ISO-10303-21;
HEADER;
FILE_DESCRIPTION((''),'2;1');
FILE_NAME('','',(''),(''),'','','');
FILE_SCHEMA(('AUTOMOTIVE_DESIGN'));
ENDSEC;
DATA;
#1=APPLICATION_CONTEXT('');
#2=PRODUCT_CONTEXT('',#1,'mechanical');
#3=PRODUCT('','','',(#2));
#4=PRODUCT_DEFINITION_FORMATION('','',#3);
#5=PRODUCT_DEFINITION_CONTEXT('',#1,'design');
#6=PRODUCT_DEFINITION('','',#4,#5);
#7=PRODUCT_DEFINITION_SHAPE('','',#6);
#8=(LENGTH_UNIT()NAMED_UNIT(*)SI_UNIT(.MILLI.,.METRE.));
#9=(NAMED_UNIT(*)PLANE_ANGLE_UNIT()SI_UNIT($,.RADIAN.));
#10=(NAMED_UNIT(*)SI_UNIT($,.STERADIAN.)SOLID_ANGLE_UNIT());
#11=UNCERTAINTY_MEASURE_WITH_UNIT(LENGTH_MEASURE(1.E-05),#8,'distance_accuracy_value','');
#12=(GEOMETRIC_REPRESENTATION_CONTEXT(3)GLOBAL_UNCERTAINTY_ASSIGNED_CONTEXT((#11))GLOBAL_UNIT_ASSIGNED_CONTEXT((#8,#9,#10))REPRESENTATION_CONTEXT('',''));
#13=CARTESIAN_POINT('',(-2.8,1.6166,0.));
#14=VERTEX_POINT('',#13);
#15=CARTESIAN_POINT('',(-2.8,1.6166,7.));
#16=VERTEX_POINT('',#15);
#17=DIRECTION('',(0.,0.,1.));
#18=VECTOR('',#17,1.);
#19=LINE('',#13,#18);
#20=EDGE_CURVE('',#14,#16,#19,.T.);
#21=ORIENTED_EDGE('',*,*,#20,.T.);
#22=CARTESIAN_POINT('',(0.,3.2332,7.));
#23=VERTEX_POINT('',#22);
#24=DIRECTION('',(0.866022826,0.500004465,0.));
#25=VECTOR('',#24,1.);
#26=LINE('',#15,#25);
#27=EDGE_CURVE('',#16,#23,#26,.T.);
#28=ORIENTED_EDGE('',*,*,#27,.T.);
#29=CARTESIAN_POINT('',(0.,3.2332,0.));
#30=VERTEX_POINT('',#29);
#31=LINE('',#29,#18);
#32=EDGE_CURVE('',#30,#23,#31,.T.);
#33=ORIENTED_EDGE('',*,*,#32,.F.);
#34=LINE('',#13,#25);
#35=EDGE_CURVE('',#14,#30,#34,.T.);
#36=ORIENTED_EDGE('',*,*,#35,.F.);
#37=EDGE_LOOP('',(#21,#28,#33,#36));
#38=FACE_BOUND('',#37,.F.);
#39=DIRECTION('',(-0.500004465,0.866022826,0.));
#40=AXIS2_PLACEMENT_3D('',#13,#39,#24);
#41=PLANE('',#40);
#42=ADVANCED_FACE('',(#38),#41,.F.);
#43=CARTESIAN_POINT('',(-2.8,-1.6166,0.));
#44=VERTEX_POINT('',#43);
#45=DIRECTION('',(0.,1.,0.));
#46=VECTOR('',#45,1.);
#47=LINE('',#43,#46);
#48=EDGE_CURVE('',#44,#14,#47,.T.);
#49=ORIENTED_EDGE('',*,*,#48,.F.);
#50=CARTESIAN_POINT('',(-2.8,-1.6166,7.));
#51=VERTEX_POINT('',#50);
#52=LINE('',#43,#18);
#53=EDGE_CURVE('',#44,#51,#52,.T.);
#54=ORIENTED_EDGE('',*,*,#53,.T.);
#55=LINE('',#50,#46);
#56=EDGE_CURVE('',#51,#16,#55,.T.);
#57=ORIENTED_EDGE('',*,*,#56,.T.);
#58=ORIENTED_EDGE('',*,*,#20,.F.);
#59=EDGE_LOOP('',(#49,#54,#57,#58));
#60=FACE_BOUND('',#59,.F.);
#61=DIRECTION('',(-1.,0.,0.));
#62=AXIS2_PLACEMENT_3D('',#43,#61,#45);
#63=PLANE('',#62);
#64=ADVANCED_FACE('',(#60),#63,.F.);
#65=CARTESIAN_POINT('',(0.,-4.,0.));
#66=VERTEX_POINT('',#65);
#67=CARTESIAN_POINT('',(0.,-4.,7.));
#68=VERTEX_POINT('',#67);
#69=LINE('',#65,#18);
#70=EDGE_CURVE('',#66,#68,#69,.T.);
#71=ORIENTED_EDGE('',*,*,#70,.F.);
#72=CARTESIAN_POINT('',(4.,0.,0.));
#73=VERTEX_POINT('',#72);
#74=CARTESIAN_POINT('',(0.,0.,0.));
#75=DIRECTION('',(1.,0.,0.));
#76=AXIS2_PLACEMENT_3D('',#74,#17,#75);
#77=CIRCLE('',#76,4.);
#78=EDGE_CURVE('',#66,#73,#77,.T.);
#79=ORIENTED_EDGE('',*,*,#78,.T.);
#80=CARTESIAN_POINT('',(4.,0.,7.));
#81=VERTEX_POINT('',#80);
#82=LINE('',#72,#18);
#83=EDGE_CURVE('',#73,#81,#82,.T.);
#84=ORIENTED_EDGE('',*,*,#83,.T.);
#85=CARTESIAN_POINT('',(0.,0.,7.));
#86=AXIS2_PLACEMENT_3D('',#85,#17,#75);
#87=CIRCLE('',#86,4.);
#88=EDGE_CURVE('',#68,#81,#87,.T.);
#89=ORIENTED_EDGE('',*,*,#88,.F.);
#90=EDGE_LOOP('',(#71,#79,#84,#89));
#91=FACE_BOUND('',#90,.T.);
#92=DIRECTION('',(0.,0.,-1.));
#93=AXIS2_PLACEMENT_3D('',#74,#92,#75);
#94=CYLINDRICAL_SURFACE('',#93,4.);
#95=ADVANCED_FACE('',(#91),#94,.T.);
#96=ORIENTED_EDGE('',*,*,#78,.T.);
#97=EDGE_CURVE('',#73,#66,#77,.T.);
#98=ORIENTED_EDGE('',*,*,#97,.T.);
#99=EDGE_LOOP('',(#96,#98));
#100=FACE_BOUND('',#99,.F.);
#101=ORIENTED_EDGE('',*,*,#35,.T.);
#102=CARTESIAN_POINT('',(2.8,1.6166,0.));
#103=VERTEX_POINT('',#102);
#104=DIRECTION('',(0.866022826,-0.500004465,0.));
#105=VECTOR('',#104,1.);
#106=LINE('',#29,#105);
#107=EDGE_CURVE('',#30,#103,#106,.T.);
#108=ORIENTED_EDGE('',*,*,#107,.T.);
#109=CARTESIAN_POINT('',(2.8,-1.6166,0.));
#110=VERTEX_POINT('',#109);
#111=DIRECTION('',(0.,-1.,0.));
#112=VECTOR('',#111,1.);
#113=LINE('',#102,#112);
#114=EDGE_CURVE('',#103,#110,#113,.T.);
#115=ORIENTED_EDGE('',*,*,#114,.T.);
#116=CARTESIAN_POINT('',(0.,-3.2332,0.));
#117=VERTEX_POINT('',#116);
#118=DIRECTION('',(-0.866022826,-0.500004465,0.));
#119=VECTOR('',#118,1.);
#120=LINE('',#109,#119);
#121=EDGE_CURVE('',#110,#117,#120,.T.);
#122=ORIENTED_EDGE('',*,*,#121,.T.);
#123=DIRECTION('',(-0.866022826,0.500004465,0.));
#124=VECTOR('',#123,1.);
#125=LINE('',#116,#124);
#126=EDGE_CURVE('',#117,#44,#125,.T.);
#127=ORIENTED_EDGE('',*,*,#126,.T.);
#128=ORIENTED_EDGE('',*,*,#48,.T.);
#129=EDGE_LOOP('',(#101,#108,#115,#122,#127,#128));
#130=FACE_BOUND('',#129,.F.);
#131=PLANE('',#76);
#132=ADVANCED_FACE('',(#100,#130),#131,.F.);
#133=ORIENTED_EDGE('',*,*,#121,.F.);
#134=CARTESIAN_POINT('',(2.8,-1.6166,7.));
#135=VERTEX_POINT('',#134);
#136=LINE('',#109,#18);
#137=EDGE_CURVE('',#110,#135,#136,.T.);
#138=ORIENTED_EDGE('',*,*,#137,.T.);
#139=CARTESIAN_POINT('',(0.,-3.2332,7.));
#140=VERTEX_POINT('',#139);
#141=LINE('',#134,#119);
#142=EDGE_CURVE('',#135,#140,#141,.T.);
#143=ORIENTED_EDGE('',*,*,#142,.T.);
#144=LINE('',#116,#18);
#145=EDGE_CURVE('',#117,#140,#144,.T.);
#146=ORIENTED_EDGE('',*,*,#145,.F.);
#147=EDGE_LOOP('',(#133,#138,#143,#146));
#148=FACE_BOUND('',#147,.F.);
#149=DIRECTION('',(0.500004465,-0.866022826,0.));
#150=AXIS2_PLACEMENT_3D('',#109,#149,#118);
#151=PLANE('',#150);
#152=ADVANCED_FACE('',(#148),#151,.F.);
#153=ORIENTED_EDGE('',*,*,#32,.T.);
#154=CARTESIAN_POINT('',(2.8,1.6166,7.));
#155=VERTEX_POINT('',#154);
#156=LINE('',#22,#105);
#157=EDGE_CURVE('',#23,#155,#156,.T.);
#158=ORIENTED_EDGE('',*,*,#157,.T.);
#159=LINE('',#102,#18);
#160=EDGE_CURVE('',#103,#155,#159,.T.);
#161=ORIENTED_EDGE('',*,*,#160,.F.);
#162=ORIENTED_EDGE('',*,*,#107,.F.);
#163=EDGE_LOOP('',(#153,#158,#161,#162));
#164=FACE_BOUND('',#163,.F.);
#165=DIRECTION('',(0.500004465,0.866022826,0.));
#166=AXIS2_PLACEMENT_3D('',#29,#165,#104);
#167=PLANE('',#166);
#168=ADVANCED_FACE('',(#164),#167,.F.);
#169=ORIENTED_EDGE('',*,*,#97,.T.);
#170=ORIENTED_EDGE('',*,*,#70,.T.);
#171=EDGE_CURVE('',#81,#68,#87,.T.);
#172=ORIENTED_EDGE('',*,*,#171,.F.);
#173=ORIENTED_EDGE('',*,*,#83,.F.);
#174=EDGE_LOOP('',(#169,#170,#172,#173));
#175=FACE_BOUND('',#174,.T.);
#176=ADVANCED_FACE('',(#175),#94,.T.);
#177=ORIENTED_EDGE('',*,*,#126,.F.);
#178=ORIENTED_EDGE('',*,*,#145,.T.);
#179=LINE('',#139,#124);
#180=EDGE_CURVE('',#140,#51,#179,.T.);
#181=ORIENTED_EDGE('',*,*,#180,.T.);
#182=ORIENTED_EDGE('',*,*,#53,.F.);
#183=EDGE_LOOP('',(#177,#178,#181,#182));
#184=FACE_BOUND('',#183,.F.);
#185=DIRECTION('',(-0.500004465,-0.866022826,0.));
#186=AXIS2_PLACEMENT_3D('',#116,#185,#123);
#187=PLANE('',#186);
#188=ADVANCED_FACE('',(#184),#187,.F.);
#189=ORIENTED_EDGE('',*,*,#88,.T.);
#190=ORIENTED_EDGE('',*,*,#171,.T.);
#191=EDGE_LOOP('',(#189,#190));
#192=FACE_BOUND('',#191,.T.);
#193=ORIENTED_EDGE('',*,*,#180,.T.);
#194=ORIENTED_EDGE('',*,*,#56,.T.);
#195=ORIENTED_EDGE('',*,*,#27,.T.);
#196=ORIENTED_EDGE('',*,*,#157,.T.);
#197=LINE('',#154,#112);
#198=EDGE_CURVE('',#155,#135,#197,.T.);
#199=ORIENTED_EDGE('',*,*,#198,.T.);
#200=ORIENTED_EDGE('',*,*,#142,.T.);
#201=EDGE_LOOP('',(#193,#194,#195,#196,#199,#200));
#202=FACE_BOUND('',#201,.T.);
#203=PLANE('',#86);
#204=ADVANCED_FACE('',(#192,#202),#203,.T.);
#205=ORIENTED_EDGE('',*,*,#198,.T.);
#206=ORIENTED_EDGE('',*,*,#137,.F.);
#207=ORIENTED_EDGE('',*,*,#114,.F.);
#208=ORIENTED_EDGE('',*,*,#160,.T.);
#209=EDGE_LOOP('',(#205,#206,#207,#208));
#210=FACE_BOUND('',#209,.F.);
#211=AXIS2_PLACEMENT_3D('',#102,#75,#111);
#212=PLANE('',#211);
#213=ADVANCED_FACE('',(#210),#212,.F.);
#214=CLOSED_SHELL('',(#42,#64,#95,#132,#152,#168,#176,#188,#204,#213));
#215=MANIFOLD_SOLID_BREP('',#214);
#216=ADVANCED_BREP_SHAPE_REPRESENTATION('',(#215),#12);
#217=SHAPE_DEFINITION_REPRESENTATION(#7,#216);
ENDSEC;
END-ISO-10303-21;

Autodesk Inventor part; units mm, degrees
ref_plane "YZ Plane" through (0, 0, 0) normal (1, 0, 0) x (0, 1, 0)
ref_plane "XZ Plane" through (0, 0, 0) normal (0, 1, 0) x (-1, 0, 0)
ref_plane "XY Plane" through (0, 0, 0) normal (0, 0, 1) x (1, 0, 0)
sketch "Boceto1" plane through (0, 0, 0) normal (0, 0, 1) x (1, 0, 0)
  circle A0 centre (0, 0) radius 4
  line L0 (0, 3.2332) -> (2.8, 1.6166)
  line L1 (2.8, 1.6166) -> (2.8, -1.6166)
  line L2 (2.8, -1.6166) -> (0, -3.2332)
  line L3 (0, -3.2332) -> (-2.8, -1.6166)
  line L4 (-2.8, -1.6166) -> (-2.8, 1.6166)
  line L5 (-2.8, 1.6166) -> (0, 3.2332)
  line L6 (0, -3.2332) -> (0, -4)
  point P0 (2.8, 0)
  dimension "d0" = 8
  dimension "d1" = 5.6
extrude "Extrusión1" add sketch "Boceto1" along normal blind 7
properties part number "AcopleRod"
